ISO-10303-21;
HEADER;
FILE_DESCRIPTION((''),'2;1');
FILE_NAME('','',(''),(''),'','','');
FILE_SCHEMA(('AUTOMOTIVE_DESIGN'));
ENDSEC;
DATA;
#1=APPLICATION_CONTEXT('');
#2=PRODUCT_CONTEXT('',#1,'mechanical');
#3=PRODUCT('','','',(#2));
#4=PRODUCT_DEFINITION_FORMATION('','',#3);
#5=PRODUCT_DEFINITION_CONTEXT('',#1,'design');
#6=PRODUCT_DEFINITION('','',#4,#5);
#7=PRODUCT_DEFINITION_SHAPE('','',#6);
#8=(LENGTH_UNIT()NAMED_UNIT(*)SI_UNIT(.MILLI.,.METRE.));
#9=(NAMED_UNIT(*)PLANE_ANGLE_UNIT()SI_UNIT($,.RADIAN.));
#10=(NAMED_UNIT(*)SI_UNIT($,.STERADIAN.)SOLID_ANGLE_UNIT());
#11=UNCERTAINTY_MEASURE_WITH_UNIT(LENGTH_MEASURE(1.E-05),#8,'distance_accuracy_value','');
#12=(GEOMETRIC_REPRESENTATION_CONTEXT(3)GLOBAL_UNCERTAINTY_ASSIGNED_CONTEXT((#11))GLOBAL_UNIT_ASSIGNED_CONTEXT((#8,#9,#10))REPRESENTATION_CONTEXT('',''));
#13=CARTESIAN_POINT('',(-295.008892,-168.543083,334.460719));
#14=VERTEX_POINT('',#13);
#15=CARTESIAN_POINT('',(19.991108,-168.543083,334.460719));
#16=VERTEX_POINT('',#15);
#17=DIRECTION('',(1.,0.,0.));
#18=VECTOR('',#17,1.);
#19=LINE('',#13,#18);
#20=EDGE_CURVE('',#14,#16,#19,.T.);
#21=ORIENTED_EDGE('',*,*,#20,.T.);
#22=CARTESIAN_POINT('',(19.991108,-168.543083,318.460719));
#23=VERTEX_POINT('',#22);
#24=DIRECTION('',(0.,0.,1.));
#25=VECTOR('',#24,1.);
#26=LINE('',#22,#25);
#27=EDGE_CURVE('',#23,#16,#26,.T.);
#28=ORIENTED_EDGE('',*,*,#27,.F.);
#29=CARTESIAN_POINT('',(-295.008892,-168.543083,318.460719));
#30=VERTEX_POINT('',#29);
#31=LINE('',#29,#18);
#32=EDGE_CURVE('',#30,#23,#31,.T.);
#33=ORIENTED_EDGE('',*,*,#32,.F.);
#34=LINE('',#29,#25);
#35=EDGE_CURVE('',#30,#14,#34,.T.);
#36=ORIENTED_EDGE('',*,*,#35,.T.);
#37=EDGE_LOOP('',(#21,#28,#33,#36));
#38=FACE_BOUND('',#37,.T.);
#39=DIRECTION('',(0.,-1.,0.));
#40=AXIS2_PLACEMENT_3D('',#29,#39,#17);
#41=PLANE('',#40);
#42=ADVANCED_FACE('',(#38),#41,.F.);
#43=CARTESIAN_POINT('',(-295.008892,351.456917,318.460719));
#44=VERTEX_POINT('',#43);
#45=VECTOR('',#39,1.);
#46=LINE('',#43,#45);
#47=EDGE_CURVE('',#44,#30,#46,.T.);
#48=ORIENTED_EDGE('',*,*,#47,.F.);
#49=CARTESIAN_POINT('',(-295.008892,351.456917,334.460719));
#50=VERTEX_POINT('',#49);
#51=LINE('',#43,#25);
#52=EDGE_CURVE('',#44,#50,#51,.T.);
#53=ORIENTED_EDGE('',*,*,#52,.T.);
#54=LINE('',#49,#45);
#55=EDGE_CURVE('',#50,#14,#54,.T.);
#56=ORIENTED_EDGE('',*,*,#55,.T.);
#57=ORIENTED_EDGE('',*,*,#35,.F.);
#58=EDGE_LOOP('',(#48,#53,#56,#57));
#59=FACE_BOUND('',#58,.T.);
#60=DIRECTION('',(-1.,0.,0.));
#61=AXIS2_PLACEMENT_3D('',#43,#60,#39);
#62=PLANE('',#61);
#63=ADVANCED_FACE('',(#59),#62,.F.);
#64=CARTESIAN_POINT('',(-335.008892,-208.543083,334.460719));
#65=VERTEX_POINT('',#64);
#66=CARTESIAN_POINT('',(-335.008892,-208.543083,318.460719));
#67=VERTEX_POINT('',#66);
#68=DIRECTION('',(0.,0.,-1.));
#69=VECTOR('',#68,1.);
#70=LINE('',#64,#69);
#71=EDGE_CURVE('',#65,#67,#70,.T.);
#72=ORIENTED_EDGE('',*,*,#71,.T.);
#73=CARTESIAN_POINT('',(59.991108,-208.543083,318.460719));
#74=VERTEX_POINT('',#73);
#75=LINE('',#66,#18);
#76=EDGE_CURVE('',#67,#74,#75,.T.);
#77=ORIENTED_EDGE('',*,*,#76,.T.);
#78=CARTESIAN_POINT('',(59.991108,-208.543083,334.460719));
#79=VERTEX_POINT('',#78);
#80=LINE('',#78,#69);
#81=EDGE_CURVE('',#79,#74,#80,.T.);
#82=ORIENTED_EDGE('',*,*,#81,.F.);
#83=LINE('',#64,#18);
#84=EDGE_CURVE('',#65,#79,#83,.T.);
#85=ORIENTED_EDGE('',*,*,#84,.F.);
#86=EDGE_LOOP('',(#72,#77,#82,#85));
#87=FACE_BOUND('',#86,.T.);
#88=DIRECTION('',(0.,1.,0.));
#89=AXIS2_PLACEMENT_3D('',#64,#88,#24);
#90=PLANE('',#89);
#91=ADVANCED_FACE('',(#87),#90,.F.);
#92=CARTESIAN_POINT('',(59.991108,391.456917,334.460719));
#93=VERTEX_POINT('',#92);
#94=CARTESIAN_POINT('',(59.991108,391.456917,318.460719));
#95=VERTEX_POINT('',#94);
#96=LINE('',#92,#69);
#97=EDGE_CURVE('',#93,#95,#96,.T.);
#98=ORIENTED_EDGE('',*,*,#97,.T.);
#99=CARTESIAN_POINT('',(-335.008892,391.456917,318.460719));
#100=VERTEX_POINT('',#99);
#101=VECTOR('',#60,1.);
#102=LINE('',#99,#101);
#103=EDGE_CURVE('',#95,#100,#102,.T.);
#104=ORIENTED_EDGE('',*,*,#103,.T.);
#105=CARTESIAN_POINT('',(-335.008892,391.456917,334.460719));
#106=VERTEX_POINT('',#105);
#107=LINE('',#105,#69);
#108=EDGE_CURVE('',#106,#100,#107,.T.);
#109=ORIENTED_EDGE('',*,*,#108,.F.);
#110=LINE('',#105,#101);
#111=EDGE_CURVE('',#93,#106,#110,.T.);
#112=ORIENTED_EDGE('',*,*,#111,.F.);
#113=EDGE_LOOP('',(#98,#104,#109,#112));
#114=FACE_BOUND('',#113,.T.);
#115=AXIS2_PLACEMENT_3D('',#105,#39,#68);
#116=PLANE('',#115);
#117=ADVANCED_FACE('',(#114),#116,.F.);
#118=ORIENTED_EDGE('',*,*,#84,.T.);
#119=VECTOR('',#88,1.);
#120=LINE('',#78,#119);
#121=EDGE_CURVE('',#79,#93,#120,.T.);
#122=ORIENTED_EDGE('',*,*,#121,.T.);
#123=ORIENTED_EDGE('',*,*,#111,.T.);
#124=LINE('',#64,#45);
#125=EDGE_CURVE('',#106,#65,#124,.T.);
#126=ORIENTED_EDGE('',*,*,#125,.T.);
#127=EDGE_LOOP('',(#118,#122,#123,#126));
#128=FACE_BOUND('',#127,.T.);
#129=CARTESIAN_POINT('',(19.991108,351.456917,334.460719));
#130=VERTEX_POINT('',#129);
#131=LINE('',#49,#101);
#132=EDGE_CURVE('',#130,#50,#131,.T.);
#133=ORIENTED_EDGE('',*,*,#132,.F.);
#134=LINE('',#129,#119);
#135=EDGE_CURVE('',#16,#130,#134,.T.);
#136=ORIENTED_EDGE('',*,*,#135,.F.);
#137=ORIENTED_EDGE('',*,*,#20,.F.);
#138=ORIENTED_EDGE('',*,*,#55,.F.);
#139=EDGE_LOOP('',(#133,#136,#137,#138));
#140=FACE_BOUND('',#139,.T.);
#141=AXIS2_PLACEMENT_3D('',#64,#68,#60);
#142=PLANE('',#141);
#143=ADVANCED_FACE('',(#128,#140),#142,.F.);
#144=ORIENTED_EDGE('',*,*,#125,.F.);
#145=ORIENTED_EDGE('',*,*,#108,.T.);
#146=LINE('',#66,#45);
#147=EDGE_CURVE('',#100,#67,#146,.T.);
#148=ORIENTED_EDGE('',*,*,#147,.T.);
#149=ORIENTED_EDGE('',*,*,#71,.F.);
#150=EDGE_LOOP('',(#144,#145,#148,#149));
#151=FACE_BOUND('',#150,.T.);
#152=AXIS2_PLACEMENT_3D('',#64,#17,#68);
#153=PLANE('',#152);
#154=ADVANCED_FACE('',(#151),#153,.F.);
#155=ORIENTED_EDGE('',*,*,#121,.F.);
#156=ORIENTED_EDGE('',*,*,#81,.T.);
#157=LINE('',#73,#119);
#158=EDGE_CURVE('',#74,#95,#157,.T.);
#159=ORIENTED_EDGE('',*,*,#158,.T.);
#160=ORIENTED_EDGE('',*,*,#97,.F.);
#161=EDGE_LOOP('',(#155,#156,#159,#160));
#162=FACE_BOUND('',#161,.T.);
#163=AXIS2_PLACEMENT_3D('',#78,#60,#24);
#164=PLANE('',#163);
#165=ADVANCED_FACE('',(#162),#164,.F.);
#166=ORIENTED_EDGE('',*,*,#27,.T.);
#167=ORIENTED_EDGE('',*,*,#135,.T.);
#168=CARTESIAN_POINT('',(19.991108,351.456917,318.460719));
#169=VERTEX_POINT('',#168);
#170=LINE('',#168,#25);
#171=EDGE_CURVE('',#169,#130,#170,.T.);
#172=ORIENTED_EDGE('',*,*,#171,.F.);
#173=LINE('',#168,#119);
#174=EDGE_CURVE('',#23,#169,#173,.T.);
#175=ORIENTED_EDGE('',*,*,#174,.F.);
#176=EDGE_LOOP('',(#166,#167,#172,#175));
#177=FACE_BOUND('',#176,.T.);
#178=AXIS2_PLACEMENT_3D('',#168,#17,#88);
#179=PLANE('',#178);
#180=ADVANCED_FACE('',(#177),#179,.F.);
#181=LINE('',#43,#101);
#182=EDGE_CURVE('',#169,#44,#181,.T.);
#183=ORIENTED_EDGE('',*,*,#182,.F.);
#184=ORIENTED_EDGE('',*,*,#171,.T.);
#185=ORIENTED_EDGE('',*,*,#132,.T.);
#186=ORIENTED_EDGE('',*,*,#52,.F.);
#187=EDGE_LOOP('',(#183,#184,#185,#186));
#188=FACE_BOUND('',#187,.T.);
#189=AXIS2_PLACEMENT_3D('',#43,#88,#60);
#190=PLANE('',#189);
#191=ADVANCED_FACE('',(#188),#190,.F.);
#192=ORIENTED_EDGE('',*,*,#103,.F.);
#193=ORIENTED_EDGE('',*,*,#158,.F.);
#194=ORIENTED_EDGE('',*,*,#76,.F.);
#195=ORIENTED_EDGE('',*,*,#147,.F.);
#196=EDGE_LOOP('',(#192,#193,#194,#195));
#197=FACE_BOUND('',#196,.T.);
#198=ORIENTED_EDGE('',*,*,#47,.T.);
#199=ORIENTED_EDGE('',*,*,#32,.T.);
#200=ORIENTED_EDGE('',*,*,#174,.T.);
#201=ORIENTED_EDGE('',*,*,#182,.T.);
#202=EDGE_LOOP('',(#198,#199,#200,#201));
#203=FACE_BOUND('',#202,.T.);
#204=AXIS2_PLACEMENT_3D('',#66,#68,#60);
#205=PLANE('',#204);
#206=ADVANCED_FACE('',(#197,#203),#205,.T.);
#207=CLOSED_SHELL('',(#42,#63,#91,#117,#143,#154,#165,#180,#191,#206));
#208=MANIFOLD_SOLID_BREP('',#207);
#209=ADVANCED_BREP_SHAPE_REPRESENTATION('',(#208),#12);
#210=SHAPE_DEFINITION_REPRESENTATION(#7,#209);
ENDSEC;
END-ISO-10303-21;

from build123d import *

# Parameters (mm, degrees)
BOTTOM_PLATE_START     = -335.008892233
BOTTOM_PLATE_OUTLINE_W = 600
BOTTOM_PLATE_OUTLINE_H = 16
BOTTOM_PLATE_DEPTH     = 395
SKETCH1_W              = 315
SKETCH1_H              = 520
CUT_EXTRUDE1_DEPTH     = 516.485669921


# Read off the part's stored shape, not the designer's step: bottom-plate
with BuildPart() as part:
    # bottom-plate outline → bottom-plate (new body)
    with BuildSketch(Plane.YZ.offset(BOTTOM_PLATE_START)):
        with Locations((91.456917194, 326.460719179)):
            Rectangle(BOTTOM_PLATE_OUTLINE_W, BOTTOM_PLATE_OUTLINE_H)
    extrude(amount=BOTTOM_PLATE_DEPTH)

    # Sketch1 → Cut-Extrude1 (cut, through all)
    with BuildSketch(Plane.XY.offset(334.460719179)):
        with Locations((-137.508892233, 91.456917194)):
            Rectangle(SKETCH1_W, SKETCH1_H)
    extrude(amount=-CUT_EXTRUDE1_DEPTH, mode=Mode.SUBTRACT)


solid = part.part
